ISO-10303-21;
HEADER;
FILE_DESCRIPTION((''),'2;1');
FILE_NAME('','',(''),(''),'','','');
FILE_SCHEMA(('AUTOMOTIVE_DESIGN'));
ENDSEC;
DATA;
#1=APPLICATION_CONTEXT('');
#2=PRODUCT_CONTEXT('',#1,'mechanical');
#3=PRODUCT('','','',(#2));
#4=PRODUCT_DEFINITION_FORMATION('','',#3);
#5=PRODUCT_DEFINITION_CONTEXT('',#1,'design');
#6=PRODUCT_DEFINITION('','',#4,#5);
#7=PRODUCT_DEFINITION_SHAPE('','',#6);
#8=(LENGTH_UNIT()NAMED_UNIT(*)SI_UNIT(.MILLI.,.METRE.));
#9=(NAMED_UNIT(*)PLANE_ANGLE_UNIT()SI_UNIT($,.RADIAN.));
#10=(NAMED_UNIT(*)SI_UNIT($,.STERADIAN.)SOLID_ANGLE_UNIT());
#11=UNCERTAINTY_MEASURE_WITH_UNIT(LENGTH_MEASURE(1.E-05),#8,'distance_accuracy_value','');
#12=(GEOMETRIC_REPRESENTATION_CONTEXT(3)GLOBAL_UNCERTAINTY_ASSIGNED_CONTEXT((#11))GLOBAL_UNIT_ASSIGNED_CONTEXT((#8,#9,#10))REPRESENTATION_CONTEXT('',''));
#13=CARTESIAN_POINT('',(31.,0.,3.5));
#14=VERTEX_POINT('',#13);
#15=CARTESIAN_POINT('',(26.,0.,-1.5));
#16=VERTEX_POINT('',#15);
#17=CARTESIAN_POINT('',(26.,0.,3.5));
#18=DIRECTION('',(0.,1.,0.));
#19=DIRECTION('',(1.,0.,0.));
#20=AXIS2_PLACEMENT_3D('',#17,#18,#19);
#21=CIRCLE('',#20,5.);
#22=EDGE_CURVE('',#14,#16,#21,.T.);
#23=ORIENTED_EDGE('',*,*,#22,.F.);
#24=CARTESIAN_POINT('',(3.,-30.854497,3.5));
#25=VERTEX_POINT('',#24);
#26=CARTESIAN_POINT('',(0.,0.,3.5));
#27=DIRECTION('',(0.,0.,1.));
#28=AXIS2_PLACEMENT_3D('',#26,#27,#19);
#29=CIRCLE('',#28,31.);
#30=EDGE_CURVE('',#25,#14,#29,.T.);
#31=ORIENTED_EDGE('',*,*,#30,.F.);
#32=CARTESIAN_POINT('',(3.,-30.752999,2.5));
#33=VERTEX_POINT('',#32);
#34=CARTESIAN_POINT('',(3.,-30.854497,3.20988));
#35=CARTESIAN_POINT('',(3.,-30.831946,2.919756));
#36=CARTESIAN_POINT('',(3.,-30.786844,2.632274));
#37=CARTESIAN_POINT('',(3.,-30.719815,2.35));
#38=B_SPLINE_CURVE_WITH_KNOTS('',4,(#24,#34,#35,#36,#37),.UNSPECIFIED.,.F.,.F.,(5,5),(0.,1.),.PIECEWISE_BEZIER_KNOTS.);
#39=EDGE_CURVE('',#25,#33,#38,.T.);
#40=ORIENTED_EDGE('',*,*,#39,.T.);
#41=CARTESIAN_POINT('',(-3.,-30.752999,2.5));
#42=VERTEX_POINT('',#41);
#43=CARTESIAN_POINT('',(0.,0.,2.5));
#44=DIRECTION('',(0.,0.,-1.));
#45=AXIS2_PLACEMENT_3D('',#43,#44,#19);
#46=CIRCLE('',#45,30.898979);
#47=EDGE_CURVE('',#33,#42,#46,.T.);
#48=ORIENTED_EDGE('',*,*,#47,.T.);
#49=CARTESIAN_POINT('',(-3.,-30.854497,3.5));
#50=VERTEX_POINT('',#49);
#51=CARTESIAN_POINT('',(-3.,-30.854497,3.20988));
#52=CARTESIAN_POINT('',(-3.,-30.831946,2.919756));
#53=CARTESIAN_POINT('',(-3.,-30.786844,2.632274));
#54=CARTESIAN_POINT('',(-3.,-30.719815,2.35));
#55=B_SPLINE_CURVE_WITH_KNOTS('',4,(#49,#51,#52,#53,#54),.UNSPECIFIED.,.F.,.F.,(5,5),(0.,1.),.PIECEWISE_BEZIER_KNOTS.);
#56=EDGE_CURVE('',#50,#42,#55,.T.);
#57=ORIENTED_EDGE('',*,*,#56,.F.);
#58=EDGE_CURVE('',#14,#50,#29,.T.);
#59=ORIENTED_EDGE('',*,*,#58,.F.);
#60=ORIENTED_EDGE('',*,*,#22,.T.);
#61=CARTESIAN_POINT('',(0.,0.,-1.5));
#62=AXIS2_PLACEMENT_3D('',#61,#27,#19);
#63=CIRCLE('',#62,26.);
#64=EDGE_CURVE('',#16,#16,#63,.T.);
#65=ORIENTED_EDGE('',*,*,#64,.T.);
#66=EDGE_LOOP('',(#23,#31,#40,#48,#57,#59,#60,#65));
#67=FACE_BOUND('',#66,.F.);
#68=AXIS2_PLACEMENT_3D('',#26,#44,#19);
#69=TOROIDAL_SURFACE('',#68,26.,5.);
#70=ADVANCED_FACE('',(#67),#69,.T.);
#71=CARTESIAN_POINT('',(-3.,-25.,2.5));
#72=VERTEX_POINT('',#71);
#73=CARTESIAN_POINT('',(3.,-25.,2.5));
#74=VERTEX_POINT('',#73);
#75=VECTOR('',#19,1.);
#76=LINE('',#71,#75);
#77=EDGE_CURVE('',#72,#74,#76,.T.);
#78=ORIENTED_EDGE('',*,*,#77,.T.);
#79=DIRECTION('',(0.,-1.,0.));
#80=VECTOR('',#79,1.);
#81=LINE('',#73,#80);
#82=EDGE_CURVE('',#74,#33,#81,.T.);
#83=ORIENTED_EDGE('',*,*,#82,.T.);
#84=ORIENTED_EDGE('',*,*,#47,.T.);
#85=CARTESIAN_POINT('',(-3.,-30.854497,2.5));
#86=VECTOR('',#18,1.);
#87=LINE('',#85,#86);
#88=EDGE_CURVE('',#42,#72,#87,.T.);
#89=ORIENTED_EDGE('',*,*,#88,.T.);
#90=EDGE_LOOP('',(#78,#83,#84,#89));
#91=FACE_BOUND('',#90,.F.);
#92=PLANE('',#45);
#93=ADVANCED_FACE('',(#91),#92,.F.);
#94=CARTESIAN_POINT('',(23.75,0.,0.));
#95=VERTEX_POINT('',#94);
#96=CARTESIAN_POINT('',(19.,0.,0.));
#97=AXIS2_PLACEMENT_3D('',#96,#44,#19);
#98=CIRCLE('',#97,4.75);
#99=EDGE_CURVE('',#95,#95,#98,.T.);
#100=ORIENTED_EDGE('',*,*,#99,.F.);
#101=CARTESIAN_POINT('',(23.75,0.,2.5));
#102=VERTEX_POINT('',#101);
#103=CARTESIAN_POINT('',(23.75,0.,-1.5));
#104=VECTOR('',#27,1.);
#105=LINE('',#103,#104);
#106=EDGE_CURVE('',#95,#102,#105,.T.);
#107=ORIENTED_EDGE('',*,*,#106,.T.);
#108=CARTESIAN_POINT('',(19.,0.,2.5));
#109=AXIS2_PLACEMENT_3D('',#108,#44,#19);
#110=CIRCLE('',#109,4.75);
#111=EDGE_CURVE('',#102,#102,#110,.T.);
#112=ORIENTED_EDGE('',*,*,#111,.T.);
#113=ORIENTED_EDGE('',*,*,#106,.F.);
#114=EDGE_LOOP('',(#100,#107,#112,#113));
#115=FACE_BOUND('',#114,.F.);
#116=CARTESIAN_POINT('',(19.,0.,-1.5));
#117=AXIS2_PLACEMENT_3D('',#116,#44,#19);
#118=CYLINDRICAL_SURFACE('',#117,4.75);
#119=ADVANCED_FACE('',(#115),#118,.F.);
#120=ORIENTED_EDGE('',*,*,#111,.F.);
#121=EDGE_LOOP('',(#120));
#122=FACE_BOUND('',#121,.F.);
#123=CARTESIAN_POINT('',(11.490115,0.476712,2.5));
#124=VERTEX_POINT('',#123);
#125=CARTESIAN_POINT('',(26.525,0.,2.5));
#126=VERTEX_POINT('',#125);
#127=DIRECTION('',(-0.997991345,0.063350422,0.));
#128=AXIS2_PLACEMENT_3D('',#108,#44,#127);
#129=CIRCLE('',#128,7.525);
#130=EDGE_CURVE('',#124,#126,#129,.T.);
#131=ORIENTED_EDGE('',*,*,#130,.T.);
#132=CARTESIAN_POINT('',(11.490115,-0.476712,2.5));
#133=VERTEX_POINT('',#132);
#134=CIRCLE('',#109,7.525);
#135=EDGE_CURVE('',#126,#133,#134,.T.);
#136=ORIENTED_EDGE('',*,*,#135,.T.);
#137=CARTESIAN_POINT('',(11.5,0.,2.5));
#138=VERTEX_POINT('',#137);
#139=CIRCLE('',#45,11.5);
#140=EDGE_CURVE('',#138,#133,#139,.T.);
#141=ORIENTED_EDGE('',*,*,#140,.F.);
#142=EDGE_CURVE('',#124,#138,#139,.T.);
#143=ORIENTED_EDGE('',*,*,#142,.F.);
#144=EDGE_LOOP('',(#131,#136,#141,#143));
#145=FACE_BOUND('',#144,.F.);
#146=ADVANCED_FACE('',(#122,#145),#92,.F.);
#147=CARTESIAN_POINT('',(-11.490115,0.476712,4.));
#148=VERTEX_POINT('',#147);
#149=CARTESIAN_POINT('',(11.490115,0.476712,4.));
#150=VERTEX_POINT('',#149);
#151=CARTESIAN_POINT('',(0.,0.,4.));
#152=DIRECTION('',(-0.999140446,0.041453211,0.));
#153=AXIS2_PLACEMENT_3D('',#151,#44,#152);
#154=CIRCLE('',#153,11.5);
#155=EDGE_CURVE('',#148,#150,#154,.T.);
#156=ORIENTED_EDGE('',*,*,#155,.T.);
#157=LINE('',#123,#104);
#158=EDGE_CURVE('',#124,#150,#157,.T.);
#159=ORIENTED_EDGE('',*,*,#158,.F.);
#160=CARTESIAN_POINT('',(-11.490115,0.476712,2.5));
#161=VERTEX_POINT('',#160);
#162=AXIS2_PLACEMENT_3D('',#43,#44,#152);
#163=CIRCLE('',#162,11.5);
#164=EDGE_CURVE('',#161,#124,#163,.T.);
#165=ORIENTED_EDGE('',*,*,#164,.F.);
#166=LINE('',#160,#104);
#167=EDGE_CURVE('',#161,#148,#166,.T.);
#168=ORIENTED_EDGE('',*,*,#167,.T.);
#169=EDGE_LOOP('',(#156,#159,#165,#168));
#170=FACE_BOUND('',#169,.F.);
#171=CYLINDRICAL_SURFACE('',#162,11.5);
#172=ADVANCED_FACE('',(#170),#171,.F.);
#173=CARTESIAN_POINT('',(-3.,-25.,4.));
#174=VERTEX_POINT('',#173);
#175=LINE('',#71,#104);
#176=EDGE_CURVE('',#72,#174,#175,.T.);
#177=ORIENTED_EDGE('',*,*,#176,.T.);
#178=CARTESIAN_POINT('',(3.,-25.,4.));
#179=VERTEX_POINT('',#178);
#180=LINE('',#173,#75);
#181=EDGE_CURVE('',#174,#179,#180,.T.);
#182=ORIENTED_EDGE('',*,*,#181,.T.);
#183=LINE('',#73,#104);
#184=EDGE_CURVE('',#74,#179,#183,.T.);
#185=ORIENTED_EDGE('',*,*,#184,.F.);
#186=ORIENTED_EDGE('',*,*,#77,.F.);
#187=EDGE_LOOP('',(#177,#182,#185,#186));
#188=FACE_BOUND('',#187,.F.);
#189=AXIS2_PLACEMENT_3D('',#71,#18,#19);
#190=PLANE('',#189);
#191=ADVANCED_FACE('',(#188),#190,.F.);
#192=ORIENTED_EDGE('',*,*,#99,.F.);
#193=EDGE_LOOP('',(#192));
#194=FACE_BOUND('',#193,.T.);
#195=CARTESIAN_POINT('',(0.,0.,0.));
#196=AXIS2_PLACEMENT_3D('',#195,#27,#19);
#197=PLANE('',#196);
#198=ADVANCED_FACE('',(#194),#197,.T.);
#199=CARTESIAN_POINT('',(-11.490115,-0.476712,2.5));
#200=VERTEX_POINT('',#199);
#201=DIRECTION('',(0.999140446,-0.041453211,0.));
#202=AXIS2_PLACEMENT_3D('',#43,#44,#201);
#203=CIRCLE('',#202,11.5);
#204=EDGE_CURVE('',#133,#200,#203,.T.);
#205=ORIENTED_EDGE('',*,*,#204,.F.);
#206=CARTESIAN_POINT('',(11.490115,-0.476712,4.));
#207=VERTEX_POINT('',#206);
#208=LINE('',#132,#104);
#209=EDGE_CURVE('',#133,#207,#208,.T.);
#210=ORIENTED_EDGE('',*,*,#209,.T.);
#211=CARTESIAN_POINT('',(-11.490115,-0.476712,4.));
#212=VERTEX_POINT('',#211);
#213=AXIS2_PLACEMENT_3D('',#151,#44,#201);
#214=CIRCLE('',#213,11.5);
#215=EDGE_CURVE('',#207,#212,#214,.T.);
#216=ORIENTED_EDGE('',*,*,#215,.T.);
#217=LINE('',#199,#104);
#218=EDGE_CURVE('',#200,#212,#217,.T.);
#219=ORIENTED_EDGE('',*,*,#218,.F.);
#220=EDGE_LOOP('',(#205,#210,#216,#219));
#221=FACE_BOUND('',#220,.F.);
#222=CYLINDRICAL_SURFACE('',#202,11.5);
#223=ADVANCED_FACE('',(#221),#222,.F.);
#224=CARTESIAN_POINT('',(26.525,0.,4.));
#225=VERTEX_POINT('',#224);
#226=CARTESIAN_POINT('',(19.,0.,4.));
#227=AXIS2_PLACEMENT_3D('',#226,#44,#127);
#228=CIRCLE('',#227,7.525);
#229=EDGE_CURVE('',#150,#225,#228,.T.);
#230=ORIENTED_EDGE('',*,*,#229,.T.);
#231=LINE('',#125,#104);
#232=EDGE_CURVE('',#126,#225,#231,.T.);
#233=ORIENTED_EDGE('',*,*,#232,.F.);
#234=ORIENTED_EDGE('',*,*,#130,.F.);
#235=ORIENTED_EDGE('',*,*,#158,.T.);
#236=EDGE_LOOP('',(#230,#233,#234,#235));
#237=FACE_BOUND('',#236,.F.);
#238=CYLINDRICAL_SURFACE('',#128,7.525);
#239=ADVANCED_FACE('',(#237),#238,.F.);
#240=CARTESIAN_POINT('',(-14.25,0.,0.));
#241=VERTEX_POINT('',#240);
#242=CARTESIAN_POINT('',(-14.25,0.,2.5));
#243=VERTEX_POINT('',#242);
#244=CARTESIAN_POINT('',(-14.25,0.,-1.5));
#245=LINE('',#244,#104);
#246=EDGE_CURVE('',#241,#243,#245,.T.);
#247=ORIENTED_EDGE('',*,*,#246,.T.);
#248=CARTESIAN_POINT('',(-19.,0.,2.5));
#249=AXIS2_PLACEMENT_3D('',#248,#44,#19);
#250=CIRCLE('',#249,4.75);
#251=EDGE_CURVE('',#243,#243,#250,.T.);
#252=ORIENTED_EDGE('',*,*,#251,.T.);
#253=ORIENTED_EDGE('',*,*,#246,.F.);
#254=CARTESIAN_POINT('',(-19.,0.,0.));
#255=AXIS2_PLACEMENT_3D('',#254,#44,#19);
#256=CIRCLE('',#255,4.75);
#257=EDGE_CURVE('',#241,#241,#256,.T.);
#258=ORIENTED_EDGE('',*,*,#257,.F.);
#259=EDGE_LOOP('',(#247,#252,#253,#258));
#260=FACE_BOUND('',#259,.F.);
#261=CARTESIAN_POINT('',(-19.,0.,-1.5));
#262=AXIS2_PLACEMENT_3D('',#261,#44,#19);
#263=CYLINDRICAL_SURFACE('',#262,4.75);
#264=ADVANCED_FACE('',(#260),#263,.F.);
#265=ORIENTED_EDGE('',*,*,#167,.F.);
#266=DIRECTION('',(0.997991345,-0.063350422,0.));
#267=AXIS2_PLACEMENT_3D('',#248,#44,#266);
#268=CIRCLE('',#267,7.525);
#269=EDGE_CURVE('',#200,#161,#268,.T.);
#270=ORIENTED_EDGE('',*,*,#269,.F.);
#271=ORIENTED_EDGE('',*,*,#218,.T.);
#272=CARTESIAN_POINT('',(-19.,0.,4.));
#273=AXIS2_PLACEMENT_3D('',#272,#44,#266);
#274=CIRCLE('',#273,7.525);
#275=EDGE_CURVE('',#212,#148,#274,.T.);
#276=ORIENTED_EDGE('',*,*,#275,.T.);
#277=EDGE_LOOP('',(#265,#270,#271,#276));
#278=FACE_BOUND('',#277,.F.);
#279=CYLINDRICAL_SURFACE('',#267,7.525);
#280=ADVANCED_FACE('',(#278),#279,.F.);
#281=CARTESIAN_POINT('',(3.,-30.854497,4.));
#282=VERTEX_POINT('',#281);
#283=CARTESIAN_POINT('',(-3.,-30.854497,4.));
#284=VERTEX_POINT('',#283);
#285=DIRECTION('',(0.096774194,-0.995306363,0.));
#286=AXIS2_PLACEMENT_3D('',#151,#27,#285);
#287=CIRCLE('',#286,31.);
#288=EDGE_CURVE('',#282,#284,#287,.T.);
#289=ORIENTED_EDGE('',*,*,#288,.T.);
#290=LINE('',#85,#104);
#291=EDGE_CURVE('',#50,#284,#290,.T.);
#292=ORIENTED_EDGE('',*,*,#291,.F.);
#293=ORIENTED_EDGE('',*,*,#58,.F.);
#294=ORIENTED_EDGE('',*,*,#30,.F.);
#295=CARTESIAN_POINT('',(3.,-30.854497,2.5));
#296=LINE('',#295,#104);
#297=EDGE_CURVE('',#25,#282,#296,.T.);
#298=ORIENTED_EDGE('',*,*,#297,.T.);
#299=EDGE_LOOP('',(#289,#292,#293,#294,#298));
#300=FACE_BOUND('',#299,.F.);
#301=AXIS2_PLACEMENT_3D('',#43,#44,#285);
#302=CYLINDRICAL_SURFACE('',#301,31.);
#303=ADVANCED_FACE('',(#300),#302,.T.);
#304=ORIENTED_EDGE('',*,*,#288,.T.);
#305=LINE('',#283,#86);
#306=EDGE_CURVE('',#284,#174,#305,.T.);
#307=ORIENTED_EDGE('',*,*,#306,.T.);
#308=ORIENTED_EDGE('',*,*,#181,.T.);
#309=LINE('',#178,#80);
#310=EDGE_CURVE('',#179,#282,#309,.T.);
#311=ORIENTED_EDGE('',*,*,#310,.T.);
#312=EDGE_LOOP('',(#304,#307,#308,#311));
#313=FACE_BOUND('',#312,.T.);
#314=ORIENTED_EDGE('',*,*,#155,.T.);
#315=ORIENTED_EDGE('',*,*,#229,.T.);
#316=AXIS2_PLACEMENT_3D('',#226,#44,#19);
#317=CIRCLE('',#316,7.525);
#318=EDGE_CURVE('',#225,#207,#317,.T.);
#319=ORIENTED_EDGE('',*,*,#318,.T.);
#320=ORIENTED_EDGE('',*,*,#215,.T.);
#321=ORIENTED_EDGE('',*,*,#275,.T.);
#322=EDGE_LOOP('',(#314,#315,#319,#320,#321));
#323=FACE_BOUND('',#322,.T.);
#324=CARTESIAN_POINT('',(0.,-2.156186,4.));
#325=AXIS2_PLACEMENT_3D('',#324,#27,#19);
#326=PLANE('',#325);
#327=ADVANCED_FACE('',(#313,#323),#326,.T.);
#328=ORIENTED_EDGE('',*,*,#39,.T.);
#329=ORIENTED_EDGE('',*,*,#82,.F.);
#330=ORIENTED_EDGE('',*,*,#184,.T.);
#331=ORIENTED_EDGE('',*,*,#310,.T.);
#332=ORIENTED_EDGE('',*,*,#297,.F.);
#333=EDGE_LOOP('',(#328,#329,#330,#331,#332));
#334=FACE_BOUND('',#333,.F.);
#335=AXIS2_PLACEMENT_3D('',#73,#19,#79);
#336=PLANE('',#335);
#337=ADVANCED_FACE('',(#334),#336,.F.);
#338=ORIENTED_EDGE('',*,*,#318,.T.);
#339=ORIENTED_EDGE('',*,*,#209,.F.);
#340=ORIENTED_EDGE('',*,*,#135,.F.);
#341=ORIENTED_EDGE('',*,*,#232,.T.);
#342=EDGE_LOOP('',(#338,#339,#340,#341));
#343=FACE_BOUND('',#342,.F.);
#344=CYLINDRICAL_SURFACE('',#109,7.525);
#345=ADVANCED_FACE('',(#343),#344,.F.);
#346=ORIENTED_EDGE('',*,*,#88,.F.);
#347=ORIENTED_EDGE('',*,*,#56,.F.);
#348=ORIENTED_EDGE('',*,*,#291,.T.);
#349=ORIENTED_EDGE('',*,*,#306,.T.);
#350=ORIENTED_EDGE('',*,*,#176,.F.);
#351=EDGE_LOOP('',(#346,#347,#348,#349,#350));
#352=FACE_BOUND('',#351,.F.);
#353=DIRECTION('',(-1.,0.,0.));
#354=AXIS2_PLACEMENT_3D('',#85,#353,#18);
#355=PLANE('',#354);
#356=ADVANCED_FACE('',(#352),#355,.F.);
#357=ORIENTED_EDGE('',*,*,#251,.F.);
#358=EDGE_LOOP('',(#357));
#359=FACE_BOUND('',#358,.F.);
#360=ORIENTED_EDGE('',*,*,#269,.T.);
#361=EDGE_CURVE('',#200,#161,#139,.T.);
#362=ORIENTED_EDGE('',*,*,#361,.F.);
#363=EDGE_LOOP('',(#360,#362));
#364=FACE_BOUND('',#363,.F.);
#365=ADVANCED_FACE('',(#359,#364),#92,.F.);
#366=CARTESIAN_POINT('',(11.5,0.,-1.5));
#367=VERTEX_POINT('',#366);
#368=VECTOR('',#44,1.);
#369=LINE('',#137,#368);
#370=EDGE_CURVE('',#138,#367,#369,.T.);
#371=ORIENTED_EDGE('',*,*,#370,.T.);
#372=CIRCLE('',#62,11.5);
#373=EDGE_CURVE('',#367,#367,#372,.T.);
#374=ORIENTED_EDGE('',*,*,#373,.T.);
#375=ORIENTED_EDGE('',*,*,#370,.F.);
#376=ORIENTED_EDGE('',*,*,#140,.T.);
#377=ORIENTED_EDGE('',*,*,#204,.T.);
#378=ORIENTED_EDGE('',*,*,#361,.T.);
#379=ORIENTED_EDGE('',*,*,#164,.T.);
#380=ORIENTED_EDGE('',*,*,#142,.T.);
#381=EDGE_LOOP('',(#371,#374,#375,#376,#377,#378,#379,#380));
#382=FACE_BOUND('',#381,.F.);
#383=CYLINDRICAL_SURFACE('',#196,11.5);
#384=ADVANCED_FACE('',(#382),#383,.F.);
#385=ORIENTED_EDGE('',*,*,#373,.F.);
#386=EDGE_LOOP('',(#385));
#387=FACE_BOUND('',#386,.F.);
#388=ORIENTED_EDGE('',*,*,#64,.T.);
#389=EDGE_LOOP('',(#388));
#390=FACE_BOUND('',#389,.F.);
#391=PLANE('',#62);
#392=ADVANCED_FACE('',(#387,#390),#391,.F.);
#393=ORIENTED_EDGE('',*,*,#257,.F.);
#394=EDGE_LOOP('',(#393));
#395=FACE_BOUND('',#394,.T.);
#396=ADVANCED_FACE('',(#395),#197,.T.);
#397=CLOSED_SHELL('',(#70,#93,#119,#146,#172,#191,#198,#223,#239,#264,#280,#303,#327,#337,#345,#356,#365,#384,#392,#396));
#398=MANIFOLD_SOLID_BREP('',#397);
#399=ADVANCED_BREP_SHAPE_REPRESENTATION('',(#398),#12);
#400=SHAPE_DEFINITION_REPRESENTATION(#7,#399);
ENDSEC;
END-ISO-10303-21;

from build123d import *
from build123d import SkipClean  # not in build123d's __all__

# Parameters (mm, degrees)
F0_R     = 31
F0_R_2   = 11.5
F1_DEPTH = 1.5
F2_R     = 31
F2_R_2   = 4.75
F2_R_3   = 11.5
F3_DEPTH = 4
F5_DEPTH = 1.5


# Not quite as in the source:
# - a fillet or chamfer that OpenCascade refuses, or shapes differently, is made with other operations: its cross-section is extruded or revolved along the edge and cut away or added


with BuildPart() as f1:
    # F0 (on Top) → F1 (new body)
    with BuildSketch(Plane.XY):
        Circle(F0_R)
        Circle(F0_R_2, mode=Mode.SUBTRACT)
    extrude(amount=-F1_DEPTH)

    # F2 (on face) → F3 (join)
    with BuildSketch(Plane(origin=(0, 0, -1.5), x_dir=(1, 0, 0), z_dir=(0, 0, -1))):
        Circle(F2_R)
        with Locations((-19, 0)):
            Circle(F2_R_2, mode=Mode.SUBTRACT)
        Circle(F2_R_3, mode=Mode.SUBTRACT)
        with Locations((19, 0)):
            Circle(F2_R_2, mode=Mode.SUBTRACT)
    extrude(amount=-F3_DEPTH)

    # F4 (on face) → F5 (join)
    with BuildSketch(Plane.XY.offset(2.5)):
        with BuildLine():
            ThreePointArc((3, -30.8544972411), (22.9564805665, -20.832666656), (31, 0))
            ThreePointArc((31, 0), (-20.832666656, 22.9564805665), (-3, -30.8544972411))
            Line((-3, -30.8544972411), (-3, -25))
            Line((-3, -25), (3, -25))
            Line((3, -25), (3, -30.8544972411))
        make_face()
        with BuildLine():
            ThreePointArc((-11.4901151316, 0.4767119288), (0, 11.5), (11.4901151316, 0.4767119288))
            ThreePointArc((11.4901151316, 0.4767119288), (19.2384757484, 7.5212202678), (26.525, 0))
            ThreePointArc((26.525, 0), (19.2384757484, -7.5212202678), (11.4901151316, -0.4767119288))
            ThreePointArc((11.4901151316, -0.4767119288), (0, -11.5), (-11.4901151316, -0.4767119288))
            ThreePointArc((-11.4901151316, -0.4767119288), (-26.525, 0), (-11.4901151316, 0.4767119288))
        make_face(mode=Mode.SUBTRACT)
    with SkipClean():  # cleaning this boolean's faces spoils the solid; the shape is the same uncleaned
        extrude(amount=F5_DEPTH)

    # F6: fillet of radius 5 on 1 edges, made by hand

    # F6_s1 → F6_t2 (revolve, cut)
    with BuildSketch(Plane.XZ):
        with BuildLine():
            ThreePointArc((31, 3.5), (29.5355339059, -0.0355339059), (26, -1.5))
            Line((26, -1.5), (31, -1.5))
            Line((31, -1.5), (31, 3.5))
        make_face()
    revolve(axis=Axis((0, 0, -1.5), (0, 0, 1)), mode=Mode.SUBTRACT)


solid = f1.part
